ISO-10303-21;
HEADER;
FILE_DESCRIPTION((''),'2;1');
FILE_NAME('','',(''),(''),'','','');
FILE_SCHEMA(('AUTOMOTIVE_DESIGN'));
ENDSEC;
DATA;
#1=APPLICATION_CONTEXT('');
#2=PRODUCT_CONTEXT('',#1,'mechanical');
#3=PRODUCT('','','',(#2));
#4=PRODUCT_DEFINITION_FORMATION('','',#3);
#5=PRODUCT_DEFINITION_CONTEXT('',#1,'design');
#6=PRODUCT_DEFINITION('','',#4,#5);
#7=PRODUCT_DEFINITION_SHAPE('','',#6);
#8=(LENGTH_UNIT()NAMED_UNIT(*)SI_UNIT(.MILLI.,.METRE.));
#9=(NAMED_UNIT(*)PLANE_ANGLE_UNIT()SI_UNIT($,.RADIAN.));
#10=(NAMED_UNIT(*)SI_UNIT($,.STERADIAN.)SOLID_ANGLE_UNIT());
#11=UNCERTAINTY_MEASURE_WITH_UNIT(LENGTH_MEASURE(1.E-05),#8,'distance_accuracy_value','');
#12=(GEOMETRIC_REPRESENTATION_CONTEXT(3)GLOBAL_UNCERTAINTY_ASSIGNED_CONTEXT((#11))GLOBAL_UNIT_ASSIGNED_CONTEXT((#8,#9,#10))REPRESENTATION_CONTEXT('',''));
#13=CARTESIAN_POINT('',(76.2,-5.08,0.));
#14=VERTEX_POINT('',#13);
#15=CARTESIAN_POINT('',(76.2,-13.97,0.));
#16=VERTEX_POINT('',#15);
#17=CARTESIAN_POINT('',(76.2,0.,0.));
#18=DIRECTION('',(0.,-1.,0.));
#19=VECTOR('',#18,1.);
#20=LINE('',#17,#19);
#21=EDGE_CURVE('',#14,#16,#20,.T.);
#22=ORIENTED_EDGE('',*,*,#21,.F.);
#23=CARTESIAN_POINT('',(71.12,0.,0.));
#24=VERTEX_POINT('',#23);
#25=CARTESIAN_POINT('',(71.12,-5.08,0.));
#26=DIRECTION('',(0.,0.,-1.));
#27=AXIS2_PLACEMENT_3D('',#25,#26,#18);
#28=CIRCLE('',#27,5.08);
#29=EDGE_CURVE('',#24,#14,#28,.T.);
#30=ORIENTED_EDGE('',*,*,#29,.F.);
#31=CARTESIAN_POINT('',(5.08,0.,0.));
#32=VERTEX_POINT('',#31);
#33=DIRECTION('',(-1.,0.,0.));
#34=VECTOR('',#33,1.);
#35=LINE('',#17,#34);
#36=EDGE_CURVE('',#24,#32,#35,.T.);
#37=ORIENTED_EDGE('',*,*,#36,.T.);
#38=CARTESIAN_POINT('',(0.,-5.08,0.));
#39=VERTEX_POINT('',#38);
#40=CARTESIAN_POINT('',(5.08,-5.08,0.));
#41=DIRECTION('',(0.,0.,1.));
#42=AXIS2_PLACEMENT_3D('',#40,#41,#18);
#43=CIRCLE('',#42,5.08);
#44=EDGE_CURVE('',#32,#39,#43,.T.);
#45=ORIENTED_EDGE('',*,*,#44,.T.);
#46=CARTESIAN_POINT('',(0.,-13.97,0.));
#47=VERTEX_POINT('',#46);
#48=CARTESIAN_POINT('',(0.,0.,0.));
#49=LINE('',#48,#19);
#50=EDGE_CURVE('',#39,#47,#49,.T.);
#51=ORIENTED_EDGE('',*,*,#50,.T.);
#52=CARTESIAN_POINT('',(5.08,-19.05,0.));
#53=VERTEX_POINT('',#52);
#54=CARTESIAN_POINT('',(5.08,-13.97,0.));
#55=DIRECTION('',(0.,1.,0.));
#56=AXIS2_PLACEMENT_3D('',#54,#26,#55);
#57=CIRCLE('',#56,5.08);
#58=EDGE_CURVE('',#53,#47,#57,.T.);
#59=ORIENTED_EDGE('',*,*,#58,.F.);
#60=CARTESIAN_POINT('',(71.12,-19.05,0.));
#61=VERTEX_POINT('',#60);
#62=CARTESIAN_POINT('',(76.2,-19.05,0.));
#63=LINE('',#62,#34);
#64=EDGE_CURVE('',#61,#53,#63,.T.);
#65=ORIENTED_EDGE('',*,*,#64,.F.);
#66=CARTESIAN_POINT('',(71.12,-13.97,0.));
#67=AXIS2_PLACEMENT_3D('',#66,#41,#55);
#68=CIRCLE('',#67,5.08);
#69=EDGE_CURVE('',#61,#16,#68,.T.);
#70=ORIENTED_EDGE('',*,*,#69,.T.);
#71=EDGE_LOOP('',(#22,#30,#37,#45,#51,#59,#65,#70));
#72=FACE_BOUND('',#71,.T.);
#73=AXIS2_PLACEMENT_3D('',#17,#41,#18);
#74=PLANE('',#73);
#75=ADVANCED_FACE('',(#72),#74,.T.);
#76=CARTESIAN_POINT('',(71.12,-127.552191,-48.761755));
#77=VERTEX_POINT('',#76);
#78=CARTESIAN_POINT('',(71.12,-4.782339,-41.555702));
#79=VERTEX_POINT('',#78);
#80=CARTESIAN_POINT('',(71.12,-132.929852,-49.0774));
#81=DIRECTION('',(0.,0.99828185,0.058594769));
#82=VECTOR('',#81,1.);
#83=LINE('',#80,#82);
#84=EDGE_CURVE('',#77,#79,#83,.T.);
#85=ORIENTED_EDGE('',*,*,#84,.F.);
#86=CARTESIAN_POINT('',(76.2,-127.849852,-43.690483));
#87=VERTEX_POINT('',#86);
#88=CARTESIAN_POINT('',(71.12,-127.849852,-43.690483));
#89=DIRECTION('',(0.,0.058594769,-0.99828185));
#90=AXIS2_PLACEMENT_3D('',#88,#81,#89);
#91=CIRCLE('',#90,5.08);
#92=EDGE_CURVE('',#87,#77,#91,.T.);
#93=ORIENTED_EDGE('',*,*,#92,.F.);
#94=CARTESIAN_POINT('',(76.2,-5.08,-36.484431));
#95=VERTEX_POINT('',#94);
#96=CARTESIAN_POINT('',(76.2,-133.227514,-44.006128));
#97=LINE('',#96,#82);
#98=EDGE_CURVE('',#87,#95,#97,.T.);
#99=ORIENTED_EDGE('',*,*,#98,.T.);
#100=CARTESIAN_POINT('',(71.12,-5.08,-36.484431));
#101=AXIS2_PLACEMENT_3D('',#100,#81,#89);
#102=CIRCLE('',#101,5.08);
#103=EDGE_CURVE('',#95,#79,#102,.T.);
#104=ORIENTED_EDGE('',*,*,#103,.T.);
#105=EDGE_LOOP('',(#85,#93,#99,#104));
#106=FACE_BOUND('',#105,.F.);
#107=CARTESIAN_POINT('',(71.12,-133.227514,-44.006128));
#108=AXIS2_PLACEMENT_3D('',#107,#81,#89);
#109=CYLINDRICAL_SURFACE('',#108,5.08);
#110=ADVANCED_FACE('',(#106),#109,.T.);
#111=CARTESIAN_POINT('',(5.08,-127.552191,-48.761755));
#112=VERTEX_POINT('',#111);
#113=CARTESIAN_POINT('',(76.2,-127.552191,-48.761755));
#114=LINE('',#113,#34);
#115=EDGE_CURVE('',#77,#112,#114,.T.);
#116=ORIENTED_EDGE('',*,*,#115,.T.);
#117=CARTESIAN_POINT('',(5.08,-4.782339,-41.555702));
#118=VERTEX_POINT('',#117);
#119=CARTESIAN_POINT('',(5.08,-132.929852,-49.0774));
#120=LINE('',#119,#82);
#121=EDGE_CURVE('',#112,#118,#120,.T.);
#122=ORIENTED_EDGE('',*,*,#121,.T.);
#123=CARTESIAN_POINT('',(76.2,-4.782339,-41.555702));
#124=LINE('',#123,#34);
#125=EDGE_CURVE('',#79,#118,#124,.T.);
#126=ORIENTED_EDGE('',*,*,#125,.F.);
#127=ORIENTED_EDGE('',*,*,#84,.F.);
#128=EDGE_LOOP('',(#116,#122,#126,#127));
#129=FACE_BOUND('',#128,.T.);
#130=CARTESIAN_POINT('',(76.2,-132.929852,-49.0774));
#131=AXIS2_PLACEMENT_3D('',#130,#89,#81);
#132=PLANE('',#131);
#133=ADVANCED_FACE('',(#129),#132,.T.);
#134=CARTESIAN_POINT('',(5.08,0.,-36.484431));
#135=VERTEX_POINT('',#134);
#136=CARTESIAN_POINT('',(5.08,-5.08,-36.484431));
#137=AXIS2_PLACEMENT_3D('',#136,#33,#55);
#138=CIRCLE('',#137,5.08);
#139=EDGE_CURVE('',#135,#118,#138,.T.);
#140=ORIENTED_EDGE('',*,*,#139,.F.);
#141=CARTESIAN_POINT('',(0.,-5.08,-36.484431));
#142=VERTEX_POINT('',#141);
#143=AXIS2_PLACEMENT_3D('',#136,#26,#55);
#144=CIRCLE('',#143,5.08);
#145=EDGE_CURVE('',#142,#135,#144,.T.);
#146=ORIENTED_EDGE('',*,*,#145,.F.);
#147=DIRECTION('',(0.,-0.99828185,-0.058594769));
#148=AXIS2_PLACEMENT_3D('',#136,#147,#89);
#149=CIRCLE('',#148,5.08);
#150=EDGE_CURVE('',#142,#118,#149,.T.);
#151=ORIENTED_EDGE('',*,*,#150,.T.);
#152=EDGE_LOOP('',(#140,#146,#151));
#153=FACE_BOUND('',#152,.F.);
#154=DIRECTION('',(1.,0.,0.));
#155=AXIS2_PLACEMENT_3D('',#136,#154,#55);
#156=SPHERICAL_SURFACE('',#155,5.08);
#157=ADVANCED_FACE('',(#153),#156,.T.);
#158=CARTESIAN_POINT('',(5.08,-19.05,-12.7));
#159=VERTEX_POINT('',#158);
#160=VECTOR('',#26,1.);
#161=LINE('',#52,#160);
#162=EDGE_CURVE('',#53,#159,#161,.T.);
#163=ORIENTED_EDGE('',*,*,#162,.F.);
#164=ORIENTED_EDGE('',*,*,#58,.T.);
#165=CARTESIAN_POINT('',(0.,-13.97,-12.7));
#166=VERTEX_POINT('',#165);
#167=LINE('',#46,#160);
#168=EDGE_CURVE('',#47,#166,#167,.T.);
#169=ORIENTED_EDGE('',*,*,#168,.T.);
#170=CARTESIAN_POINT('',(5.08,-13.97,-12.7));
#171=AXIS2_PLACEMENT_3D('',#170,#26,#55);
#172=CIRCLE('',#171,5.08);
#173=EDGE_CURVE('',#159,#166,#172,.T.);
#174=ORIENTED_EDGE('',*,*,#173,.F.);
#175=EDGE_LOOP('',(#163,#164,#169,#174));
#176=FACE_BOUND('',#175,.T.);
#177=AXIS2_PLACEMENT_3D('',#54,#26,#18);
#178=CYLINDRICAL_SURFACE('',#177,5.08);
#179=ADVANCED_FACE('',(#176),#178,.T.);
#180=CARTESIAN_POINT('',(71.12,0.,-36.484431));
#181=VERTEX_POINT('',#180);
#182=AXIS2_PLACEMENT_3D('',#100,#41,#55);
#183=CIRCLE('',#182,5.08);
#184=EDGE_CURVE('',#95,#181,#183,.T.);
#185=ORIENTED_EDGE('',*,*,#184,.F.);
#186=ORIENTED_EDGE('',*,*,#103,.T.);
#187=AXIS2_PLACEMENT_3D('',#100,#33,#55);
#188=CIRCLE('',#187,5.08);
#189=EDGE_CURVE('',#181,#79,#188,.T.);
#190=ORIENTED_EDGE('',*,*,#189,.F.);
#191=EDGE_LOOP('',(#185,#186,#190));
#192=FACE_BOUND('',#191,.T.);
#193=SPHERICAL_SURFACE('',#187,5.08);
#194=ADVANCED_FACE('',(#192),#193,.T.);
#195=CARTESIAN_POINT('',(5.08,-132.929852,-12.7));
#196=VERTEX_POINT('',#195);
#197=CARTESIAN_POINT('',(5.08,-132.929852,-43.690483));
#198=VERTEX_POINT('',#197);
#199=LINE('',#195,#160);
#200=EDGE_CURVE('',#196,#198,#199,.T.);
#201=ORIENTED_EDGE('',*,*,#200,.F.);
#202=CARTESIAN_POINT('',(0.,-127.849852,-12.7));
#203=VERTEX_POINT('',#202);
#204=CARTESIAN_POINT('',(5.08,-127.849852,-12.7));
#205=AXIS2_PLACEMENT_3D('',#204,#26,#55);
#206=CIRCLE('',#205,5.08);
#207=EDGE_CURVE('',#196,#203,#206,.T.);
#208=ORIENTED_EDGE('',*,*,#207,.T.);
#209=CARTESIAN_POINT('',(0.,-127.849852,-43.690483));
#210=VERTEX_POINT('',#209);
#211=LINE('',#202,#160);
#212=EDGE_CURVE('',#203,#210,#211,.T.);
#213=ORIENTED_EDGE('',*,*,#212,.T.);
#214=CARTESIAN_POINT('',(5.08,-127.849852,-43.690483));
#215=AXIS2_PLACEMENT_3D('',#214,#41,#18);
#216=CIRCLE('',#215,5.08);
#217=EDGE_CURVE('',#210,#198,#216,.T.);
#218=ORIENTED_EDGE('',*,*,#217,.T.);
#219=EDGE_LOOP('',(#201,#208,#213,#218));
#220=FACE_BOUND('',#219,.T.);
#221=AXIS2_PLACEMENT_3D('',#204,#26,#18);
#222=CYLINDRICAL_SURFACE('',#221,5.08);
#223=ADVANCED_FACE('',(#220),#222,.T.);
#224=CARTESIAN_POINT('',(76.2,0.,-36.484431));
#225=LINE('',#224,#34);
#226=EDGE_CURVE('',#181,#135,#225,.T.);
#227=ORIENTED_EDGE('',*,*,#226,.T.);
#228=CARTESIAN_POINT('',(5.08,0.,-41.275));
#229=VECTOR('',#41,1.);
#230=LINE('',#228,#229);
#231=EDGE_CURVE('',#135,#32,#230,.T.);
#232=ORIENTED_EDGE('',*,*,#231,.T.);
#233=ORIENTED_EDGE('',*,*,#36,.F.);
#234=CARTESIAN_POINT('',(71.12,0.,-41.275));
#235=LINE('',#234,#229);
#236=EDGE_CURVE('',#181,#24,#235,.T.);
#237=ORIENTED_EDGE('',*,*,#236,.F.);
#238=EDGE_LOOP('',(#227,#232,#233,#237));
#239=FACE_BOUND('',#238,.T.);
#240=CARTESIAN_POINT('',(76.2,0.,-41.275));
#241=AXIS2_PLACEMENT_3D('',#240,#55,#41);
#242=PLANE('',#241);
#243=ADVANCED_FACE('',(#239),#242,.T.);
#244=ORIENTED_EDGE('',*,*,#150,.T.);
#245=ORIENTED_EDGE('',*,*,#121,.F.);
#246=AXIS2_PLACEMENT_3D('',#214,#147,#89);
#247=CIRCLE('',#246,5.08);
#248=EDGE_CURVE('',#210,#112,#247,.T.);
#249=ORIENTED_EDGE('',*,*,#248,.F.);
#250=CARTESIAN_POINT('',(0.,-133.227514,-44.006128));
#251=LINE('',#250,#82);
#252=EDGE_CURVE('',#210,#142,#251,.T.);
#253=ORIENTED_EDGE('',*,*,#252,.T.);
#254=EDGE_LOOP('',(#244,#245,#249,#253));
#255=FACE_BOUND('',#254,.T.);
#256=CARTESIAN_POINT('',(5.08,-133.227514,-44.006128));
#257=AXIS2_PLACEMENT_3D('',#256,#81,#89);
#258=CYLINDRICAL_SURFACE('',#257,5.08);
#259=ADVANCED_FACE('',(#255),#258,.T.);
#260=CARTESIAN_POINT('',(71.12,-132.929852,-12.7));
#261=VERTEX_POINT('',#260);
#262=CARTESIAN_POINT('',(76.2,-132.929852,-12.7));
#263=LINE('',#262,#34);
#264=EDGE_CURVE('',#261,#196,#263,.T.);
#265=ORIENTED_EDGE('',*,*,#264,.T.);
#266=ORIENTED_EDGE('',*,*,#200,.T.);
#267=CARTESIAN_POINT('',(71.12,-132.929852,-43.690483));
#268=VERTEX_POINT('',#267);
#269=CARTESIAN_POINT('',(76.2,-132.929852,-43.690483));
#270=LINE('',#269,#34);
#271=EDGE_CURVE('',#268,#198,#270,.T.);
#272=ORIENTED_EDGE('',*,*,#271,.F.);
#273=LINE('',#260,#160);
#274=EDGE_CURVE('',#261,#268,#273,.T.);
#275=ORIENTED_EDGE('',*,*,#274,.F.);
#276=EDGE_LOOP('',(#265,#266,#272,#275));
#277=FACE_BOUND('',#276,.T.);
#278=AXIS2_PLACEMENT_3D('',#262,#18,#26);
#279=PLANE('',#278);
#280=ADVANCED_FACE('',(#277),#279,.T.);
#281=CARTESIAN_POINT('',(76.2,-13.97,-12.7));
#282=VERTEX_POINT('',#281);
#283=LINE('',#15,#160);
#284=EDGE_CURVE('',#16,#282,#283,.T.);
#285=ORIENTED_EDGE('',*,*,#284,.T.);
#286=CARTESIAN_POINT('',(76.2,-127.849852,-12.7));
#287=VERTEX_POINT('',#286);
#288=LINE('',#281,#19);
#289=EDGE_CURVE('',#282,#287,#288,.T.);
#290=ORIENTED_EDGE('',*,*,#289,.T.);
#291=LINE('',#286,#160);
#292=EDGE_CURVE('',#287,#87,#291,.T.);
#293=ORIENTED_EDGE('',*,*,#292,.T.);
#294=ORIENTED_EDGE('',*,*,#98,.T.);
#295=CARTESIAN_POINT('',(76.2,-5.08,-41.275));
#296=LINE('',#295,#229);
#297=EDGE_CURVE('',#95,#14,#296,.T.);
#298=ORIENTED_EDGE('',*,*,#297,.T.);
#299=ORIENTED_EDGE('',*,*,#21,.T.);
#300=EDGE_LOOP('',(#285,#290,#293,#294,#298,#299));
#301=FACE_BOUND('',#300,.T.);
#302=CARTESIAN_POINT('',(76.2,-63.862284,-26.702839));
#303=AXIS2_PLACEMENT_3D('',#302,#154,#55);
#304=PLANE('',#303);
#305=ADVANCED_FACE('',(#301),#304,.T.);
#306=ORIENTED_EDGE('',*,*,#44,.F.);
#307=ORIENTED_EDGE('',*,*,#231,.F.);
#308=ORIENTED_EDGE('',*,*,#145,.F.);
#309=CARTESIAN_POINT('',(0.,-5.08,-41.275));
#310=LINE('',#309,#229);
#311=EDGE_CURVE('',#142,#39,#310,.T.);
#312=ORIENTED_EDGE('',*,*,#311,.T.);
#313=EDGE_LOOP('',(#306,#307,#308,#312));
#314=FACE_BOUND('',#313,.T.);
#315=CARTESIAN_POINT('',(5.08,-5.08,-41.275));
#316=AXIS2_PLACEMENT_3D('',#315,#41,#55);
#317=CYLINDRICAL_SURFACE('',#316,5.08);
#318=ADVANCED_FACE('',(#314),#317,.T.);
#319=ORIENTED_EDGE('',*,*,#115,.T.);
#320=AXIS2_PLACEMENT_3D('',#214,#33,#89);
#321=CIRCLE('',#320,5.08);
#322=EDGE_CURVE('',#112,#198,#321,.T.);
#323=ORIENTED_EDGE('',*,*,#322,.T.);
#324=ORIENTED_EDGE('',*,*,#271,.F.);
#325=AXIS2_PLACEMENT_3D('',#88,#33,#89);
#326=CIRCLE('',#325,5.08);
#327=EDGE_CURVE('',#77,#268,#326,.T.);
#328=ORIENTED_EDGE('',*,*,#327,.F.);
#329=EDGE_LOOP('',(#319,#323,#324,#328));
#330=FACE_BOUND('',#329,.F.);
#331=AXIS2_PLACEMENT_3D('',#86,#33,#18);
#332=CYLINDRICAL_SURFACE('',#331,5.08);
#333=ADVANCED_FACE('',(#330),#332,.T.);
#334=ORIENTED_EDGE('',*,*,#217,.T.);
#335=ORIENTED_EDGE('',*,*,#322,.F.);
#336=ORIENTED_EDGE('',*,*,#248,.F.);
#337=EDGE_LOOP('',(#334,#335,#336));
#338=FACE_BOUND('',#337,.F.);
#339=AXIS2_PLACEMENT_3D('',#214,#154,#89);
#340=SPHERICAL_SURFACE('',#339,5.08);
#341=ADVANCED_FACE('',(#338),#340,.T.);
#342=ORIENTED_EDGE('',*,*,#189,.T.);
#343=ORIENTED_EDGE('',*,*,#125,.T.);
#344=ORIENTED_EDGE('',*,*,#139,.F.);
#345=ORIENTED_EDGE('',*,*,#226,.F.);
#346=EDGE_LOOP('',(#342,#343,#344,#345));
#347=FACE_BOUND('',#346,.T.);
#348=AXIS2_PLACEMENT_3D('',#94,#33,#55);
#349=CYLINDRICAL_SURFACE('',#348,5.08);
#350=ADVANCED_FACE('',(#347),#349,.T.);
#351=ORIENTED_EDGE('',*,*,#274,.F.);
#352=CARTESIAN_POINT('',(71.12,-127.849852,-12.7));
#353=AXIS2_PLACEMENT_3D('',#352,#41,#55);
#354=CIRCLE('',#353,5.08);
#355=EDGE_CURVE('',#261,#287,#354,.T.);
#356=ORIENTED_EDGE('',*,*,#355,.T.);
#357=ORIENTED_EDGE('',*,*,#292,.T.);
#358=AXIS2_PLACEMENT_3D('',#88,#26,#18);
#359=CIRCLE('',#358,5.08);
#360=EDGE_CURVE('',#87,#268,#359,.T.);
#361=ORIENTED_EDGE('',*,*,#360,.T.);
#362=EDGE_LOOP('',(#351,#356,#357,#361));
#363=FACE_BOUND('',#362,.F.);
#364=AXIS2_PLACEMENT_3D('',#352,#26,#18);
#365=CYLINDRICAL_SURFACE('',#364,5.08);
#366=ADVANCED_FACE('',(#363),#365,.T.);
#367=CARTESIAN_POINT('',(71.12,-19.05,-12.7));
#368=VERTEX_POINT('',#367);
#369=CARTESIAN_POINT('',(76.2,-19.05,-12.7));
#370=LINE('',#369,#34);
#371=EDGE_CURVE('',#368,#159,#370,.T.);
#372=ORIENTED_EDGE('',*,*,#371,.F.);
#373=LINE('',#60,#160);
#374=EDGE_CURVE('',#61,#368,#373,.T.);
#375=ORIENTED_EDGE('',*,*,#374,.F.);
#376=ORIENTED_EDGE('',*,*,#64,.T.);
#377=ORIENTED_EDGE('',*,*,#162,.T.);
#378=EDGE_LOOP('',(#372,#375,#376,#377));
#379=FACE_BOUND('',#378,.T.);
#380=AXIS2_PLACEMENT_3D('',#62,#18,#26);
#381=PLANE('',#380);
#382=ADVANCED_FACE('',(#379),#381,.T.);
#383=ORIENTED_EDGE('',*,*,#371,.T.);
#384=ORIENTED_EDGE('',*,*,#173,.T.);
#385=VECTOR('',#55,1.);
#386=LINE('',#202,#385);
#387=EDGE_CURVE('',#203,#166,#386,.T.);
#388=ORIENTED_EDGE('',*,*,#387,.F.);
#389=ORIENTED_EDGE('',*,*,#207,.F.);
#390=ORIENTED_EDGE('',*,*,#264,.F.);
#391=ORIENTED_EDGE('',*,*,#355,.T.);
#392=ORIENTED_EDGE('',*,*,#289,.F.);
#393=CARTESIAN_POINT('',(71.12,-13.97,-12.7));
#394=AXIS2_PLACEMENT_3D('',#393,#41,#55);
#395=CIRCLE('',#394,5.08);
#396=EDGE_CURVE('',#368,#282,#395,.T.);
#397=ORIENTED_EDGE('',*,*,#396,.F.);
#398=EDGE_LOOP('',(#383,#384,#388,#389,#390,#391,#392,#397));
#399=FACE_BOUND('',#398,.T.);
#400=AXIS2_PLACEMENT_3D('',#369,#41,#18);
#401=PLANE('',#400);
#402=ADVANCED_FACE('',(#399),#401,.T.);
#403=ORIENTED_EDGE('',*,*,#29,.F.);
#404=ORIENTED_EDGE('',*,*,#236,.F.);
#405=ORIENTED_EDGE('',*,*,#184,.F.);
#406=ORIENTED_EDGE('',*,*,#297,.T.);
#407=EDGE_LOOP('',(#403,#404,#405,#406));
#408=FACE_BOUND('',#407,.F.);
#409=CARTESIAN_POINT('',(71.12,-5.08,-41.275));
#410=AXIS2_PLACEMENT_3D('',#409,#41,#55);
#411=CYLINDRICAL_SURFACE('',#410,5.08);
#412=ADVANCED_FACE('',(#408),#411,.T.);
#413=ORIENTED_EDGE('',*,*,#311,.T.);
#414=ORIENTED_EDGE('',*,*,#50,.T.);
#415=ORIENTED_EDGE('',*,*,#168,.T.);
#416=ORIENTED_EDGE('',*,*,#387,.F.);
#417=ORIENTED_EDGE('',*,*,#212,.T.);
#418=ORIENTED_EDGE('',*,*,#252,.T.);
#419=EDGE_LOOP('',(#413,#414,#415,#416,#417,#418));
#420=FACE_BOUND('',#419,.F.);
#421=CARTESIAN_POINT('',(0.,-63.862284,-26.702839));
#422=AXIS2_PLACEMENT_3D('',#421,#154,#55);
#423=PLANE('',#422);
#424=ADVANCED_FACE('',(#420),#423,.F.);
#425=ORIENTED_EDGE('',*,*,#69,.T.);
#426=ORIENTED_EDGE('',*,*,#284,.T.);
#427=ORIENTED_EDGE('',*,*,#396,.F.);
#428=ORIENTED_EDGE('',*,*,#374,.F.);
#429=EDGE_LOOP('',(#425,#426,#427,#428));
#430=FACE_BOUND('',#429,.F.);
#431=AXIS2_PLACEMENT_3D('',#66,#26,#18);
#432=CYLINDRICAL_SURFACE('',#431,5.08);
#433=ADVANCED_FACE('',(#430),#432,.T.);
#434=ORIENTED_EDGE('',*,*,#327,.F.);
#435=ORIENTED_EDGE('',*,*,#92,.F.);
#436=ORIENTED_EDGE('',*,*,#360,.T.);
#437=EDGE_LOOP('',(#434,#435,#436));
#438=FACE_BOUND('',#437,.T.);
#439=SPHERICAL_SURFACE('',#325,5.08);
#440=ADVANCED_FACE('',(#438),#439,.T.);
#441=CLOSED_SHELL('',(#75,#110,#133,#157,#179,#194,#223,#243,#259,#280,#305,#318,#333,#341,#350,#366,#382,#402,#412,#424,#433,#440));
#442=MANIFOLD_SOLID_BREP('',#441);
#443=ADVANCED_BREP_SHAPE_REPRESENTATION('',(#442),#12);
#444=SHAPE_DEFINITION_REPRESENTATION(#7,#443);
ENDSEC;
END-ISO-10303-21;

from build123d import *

# Parameters (mm, degrees)
F2_DEPTH = 76.2
F3_R     = 5.08


# Not quite as in the source:
# - a feature names something its author has since deleted; it is built from what else it names


with BuildPart() as f2:
    # F1 (on offset) → F2 (new body)
    with BuildSketch(Plane.YZ.offset(76.2)):
        Polygon((0, -41.275), (0, 0), (-19.05, 0), (-19.05, -12.7), (-132.9298521399, -12.7), (-132.9298521399, -49.0773997059), align=None)
    extrude(amount=-F2_DEPTH)

    # F3
    f3_edges = [f2.edges().sort_by_distance(p)[0] for p in [
        (38.1, 0, -41.275),
        (76.2, 0, -20.6375),
        (0, 0, -20.6375),
        (76.2, -66.464926, -45.1762),
        (0, -66.464926, -45.1762),
        (0, -19.05, -6.35),
        (76.2, -19.05, -6.35),
        (0, -132.929852, -30.8887),
        (76.2, -132.929852, -30.8887),
        (38.1, -132.929852, -49.0774),
    ]]
    fillet(f3_edges, radius=F3_R)


solid = f2.part
